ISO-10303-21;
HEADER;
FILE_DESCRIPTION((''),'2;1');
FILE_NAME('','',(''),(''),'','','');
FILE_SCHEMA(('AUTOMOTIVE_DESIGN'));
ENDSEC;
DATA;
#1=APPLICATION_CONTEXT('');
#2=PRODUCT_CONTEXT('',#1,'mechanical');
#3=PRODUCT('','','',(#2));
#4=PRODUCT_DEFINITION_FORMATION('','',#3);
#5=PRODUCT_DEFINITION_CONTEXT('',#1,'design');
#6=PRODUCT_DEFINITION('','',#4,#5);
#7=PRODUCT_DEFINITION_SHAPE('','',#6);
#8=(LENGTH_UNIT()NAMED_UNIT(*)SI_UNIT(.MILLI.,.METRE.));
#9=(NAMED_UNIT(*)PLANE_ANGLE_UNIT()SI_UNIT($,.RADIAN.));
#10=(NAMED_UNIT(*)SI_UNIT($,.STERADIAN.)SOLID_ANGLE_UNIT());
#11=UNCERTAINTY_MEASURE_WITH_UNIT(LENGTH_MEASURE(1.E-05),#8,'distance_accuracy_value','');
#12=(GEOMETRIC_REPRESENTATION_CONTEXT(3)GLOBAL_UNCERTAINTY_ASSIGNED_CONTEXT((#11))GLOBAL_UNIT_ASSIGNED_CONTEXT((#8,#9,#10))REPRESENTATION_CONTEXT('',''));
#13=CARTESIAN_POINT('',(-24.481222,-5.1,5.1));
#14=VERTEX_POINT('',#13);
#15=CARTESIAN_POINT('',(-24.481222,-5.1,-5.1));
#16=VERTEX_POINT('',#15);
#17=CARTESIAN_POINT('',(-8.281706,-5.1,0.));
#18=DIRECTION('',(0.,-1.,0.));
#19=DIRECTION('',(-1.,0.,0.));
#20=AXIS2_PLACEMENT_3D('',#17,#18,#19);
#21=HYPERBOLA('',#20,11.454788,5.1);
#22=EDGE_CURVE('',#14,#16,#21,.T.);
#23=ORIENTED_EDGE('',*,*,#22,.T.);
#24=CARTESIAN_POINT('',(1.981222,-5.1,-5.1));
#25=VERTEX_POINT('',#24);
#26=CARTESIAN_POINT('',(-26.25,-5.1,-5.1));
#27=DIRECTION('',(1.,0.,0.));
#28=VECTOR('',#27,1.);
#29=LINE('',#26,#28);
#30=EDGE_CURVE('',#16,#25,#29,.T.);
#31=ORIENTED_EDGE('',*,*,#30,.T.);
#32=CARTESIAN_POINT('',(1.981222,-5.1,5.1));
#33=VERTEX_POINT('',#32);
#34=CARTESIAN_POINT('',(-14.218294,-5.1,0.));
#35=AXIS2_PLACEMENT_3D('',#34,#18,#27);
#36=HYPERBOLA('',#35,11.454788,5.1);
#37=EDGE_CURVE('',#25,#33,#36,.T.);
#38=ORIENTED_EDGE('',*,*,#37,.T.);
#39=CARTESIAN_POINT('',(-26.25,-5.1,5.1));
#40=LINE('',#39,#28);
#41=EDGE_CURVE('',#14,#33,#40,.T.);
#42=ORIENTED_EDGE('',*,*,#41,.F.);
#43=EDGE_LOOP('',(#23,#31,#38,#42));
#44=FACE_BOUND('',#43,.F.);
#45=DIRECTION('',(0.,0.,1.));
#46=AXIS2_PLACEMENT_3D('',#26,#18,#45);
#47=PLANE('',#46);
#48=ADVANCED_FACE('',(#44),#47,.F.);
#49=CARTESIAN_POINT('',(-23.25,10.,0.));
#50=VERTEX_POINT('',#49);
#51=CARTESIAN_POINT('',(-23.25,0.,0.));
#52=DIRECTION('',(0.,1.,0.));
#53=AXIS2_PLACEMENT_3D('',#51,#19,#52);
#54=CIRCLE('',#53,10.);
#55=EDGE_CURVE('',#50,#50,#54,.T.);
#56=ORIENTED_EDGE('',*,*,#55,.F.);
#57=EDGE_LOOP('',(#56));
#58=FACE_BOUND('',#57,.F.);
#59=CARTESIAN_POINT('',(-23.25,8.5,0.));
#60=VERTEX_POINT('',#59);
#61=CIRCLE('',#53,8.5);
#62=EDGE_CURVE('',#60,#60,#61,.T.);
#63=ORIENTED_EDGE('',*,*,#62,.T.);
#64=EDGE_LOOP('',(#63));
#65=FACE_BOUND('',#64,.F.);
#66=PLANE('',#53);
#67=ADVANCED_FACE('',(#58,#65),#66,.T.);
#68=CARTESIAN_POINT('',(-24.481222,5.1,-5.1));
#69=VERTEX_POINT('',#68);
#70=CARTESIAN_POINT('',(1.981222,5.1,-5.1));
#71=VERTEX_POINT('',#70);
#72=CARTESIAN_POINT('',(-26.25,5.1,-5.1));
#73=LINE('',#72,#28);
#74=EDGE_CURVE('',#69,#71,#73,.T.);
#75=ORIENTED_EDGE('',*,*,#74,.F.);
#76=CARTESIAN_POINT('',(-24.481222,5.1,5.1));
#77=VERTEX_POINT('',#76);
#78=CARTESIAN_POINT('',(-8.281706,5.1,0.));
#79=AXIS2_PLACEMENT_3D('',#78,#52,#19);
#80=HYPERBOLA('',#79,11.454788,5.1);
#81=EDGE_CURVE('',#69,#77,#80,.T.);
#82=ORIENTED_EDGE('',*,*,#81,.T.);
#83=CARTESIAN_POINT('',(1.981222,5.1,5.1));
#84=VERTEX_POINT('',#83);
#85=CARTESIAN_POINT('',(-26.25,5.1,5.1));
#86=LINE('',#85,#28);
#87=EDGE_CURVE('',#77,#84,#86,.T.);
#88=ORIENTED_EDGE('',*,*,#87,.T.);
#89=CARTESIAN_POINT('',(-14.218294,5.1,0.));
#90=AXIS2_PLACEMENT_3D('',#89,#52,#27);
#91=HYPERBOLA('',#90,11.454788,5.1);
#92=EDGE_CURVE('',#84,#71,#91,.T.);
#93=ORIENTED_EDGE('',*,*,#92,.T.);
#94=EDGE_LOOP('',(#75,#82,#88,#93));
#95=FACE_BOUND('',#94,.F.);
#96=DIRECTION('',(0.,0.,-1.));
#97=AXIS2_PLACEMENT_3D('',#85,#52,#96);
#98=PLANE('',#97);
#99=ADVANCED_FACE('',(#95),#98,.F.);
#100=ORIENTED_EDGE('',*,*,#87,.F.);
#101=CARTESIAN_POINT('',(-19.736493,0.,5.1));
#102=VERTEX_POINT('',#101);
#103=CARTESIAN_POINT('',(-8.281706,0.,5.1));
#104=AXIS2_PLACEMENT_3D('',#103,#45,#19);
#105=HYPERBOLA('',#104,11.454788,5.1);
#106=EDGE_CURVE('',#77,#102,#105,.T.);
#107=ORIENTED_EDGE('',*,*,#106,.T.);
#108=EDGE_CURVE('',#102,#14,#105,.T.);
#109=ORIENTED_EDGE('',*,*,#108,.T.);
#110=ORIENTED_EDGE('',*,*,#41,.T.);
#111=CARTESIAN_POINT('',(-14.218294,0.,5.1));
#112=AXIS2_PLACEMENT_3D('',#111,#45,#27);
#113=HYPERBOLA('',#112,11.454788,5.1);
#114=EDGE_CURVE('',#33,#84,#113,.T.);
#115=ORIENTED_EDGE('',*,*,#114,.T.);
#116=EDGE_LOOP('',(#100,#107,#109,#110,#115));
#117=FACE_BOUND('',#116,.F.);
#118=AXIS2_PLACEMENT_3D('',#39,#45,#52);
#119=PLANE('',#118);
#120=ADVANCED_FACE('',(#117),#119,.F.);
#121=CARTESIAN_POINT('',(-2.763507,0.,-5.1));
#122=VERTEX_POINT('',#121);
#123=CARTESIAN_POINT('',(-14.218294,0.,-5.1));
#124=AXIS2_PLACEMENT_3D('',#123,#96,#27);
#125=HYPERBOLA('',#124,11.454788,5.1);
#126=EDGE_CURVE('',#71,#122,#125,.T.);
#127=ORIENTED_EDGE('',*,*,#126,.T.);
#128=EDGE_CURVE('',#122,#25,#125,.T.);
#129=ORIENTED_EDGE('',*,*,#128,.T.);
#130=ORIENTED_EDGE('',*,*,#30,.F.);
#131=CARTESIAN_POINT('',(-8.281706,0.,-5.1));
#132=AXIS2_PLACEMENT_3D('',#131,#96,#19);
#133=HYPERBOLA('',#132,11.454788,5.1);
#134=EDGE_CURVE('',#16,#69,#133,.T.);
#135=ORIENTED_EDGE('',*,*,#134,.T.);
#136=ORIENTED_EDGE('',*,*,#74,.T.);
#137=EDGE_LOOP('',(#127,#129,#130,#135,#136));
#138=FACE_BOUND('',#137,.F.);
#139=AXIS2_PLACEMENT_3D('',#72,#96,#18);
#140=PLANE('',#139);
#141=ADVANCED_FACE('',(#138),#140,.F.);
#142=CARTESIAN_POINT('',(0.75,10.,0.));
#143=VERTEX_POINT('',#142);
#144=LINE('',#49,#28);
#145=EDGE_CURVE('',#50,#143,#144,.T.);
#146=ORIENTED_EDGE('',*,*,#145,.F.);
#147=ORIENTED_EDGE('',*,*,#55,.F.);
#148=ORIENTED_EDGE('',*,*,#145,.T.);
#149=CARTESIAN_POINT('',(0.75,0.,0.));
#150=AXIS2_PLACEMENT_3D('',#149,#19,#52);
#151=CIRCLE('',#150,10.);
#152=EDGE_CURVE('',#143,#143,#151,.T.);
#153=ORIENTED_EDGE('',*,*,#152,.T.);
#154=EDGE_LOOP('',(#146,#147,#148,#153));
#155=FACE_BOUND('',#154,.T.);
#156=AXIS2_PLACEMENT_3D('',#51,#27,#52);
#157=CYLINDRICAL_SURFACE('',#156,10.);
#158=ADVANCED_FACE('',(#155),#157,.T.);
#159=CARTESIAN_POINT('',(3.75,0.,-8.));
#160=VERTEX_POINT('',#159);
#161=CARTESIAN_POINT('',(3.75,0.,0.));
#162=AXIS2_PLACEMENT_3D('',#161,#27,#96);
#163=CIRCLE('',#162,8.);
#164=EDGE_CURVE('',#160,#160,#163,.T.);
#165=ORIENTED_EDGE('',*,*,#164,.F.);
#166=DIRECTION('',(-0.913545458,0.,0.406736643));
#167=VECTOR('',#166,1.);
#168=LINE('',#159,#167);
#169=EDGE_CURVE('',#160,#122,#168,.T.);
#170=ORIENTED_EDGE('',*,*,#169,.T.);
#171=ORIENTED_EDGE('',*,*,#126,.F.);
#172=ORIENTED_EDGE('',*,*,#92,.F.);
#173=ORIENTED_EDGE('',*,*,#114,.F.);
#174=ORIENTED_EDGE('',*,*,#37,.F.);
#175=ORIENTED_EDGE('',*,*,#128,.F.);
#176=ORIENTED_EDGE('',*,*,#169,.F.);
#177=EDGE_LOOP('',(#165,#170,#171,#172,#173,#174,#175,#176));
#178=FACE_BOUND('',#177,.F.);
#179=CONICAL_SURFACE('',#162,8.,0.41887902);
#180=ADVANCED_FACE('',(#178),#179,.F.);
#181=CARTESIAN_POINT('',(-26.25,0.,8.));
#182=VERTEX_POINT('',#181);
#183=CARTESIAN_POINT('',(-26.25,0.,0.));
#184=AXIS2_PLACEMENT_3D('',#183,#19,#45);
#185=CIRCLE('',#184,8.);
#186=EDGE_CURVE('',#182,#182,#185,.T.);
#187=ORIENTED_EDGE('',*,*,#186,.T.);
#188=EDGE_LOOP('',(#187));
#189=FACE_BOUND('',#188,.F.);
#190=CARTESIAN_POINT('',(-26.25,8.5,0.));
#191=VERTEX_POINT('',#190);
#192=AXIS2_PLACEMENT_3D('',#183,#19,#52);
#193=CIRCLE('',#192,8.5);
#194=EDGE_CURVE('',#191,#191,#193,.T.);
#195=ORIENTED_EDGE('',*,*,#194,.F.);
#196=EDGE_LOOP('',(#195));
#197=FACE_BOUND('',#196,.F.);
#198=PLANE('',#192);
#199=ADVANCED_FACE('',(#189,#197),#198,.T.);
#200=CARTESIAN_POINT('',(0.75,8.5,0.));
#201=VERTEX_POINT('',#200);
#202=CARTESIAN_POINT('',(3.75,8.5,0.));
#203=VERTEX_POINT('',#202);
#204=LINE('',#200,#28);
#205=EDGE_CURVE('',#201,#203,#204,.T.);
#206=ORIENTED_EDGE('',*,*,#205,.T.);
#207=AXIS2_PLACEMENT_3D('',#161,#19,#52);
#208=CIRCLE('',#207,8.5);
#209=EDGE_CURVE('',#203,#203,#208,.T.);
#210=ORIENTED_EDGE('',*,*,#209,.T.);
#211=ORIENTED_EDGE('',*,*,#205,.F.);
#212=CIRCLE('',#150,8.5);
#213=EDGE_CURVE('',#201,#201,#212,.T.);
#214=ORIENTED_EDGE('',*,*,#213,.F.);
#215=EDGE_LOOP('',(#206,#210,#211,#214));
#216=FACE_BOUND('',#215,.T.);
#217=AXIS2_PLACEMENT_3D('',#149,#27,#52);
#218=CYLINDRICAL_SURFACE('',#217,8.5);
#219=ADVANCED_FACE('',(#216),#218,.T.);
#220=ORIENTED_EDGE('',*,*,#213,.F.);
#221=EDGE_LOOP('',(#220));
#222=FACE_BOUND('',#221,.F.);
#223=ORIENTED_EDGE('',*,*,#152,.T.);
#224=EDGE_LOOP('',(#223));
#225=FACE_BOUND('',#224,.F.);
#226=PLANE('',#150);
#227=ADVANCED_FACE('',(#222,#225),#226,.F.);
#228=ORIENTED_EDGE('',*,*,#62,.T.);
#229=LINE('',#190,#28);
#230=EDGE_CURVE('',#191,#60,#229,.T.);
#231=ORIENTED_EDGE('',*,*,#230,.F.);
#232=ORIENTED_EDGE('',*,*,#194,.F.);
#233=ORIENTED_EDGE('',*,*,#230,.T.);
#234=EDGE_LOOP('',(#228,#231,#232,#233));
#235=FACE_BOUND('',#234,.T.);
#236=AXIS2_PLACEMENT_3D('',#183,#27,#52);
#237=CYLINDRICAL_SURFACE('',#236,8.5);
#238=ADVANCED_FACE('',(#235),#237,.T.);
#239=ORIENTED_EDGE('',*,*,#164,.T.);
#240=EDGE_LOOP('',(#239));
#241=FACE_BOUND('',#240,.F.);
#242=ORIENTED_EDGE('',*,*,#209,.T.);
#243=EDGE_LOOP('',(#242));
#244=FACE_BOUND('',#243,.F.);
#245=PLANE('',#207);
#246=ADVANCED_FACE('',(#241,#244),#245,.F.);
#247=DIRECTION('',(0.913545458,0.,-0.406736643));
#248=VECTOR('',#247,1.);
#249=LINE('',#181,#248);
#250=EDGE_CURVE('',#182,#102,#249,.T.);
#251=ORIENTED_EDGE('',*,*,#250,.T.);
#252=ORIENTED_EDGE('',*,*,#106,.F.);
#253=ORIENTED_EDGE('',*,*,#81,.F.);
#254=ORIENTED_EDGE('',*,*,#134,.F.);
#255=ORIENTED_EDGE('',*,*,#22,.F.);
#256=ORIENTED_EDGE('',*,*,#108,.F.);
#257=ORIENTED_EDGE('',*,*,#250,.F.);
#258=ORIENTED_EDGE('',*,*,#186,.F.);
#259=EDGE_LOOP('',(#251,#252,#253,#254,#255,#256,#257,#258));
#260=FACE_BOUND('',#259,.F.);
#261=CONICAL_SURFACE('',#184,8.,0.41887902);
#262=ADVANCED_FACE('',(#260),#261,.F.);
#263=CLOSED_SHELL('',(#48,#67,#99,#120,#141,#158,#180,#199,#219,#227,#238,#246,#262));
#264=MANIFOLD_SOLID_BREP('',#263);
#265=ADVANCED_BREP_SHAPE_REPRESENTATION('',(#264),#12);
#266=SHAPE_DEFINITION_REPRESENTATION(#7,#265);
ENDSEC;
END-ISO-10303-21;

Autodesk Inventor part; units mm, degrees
ref_plane "YZ Plane" through (0, 0, 0) normal (1, 0, 0) x (0, 1, 0)
ref_plane "XZ Plane" through (0, 0, 0) normal (0, 1, 0) x (-1, 0, 0)
sketch "Szkic1" plane through (0, 0, 0) normal (0, 0, 1) x (1, 0, 0)
  point P0 (0, 0)
sketch "Szkic2" plane through (0, 0, 0) normal (0, 0, 1) x (1, 0, 0)
  line L0 (-26.25, 0) -> (-26.25, 8.5)
  line L1 (-26.25, 8.5) -> (-23.25, 8.5)
  line L2 (-23.25, 8.5) -> (-23.25, 10)
  line L3 (-23.25, 10) -> (0.75, 10)
  line L4 (0.75, 10) -> (0.75, 8.5)
  line L5 (0.75, 8.5) -> (3.75, 8.5)
  line L6 (3.75, 8.5) -> (3.75, 0)
  line L7 (3.75, 0) -> (-26.25, 0)
  point P0 (0, 0)
  dimension "d0" = 30
  dimension "d2" = 3
  dimension "d3" = 24
  dimension "d4" = 20
  dimension "d5" = 17
revolve "Obrót1" add sketch "Szkic2" angle 360 about axis through (3.75, 0, 0) along (-1, 0, 0)
sketch "Szkic3" plane through (3.75, 0, 0) normal (1, 0, 0) x (0, 0, -1)
  circle A0 centre (0, 0) radius 8
  dimension "d7" = 16
extrude "Wyciągnięcie proste1" cut sketch "Szkic3" against normal blind 10 draft -24
sketch "Szkic4" plane through (-26.25, 0, 0) normal (-1, 0, 0) x (0, 0, 1)
  line L0 (-5.1, -5.1) -> (5.1, -5.1)
  line L1 (5.1, -5.1) -> (5.1, 5.1)
  line L2 (5.1, 5.1) -> (-5.1, 5.1)
  line L3 (-5.1, 5.1) -> (-5.1, -5.1)
  line L4 (-5.1, -5.1) -> (5.1, 5.1) construction
  line L5 (5.1, -5.1) -> (-5.1, 5.1) construction
  point P0 (0, 0)
  dimension "d10" = 10.2
  dimension "d11" = 10.2
extrude "Wyciągnięcie proste2" cut sketch "Szkic4" against normal through all
sketch "Szkic5" plane through (-26.25, 0, 0) normal (-1, 0, 0) x (0, 0, 1)
  circle A0 centre (0, 0) radius 8
  dimension "d14" = 16
extrude "Wyciągnięcie proste3" cut sketch "Szkic5" against normal blind 10 draft -24
sketch "Szkic6" plane through (0, 0, 0) normal (0, 0, 1) x (1, 0, 0)
  point P0 (0, 0)
properties part number "Bartosz_Zukowski_model_nr_13"
